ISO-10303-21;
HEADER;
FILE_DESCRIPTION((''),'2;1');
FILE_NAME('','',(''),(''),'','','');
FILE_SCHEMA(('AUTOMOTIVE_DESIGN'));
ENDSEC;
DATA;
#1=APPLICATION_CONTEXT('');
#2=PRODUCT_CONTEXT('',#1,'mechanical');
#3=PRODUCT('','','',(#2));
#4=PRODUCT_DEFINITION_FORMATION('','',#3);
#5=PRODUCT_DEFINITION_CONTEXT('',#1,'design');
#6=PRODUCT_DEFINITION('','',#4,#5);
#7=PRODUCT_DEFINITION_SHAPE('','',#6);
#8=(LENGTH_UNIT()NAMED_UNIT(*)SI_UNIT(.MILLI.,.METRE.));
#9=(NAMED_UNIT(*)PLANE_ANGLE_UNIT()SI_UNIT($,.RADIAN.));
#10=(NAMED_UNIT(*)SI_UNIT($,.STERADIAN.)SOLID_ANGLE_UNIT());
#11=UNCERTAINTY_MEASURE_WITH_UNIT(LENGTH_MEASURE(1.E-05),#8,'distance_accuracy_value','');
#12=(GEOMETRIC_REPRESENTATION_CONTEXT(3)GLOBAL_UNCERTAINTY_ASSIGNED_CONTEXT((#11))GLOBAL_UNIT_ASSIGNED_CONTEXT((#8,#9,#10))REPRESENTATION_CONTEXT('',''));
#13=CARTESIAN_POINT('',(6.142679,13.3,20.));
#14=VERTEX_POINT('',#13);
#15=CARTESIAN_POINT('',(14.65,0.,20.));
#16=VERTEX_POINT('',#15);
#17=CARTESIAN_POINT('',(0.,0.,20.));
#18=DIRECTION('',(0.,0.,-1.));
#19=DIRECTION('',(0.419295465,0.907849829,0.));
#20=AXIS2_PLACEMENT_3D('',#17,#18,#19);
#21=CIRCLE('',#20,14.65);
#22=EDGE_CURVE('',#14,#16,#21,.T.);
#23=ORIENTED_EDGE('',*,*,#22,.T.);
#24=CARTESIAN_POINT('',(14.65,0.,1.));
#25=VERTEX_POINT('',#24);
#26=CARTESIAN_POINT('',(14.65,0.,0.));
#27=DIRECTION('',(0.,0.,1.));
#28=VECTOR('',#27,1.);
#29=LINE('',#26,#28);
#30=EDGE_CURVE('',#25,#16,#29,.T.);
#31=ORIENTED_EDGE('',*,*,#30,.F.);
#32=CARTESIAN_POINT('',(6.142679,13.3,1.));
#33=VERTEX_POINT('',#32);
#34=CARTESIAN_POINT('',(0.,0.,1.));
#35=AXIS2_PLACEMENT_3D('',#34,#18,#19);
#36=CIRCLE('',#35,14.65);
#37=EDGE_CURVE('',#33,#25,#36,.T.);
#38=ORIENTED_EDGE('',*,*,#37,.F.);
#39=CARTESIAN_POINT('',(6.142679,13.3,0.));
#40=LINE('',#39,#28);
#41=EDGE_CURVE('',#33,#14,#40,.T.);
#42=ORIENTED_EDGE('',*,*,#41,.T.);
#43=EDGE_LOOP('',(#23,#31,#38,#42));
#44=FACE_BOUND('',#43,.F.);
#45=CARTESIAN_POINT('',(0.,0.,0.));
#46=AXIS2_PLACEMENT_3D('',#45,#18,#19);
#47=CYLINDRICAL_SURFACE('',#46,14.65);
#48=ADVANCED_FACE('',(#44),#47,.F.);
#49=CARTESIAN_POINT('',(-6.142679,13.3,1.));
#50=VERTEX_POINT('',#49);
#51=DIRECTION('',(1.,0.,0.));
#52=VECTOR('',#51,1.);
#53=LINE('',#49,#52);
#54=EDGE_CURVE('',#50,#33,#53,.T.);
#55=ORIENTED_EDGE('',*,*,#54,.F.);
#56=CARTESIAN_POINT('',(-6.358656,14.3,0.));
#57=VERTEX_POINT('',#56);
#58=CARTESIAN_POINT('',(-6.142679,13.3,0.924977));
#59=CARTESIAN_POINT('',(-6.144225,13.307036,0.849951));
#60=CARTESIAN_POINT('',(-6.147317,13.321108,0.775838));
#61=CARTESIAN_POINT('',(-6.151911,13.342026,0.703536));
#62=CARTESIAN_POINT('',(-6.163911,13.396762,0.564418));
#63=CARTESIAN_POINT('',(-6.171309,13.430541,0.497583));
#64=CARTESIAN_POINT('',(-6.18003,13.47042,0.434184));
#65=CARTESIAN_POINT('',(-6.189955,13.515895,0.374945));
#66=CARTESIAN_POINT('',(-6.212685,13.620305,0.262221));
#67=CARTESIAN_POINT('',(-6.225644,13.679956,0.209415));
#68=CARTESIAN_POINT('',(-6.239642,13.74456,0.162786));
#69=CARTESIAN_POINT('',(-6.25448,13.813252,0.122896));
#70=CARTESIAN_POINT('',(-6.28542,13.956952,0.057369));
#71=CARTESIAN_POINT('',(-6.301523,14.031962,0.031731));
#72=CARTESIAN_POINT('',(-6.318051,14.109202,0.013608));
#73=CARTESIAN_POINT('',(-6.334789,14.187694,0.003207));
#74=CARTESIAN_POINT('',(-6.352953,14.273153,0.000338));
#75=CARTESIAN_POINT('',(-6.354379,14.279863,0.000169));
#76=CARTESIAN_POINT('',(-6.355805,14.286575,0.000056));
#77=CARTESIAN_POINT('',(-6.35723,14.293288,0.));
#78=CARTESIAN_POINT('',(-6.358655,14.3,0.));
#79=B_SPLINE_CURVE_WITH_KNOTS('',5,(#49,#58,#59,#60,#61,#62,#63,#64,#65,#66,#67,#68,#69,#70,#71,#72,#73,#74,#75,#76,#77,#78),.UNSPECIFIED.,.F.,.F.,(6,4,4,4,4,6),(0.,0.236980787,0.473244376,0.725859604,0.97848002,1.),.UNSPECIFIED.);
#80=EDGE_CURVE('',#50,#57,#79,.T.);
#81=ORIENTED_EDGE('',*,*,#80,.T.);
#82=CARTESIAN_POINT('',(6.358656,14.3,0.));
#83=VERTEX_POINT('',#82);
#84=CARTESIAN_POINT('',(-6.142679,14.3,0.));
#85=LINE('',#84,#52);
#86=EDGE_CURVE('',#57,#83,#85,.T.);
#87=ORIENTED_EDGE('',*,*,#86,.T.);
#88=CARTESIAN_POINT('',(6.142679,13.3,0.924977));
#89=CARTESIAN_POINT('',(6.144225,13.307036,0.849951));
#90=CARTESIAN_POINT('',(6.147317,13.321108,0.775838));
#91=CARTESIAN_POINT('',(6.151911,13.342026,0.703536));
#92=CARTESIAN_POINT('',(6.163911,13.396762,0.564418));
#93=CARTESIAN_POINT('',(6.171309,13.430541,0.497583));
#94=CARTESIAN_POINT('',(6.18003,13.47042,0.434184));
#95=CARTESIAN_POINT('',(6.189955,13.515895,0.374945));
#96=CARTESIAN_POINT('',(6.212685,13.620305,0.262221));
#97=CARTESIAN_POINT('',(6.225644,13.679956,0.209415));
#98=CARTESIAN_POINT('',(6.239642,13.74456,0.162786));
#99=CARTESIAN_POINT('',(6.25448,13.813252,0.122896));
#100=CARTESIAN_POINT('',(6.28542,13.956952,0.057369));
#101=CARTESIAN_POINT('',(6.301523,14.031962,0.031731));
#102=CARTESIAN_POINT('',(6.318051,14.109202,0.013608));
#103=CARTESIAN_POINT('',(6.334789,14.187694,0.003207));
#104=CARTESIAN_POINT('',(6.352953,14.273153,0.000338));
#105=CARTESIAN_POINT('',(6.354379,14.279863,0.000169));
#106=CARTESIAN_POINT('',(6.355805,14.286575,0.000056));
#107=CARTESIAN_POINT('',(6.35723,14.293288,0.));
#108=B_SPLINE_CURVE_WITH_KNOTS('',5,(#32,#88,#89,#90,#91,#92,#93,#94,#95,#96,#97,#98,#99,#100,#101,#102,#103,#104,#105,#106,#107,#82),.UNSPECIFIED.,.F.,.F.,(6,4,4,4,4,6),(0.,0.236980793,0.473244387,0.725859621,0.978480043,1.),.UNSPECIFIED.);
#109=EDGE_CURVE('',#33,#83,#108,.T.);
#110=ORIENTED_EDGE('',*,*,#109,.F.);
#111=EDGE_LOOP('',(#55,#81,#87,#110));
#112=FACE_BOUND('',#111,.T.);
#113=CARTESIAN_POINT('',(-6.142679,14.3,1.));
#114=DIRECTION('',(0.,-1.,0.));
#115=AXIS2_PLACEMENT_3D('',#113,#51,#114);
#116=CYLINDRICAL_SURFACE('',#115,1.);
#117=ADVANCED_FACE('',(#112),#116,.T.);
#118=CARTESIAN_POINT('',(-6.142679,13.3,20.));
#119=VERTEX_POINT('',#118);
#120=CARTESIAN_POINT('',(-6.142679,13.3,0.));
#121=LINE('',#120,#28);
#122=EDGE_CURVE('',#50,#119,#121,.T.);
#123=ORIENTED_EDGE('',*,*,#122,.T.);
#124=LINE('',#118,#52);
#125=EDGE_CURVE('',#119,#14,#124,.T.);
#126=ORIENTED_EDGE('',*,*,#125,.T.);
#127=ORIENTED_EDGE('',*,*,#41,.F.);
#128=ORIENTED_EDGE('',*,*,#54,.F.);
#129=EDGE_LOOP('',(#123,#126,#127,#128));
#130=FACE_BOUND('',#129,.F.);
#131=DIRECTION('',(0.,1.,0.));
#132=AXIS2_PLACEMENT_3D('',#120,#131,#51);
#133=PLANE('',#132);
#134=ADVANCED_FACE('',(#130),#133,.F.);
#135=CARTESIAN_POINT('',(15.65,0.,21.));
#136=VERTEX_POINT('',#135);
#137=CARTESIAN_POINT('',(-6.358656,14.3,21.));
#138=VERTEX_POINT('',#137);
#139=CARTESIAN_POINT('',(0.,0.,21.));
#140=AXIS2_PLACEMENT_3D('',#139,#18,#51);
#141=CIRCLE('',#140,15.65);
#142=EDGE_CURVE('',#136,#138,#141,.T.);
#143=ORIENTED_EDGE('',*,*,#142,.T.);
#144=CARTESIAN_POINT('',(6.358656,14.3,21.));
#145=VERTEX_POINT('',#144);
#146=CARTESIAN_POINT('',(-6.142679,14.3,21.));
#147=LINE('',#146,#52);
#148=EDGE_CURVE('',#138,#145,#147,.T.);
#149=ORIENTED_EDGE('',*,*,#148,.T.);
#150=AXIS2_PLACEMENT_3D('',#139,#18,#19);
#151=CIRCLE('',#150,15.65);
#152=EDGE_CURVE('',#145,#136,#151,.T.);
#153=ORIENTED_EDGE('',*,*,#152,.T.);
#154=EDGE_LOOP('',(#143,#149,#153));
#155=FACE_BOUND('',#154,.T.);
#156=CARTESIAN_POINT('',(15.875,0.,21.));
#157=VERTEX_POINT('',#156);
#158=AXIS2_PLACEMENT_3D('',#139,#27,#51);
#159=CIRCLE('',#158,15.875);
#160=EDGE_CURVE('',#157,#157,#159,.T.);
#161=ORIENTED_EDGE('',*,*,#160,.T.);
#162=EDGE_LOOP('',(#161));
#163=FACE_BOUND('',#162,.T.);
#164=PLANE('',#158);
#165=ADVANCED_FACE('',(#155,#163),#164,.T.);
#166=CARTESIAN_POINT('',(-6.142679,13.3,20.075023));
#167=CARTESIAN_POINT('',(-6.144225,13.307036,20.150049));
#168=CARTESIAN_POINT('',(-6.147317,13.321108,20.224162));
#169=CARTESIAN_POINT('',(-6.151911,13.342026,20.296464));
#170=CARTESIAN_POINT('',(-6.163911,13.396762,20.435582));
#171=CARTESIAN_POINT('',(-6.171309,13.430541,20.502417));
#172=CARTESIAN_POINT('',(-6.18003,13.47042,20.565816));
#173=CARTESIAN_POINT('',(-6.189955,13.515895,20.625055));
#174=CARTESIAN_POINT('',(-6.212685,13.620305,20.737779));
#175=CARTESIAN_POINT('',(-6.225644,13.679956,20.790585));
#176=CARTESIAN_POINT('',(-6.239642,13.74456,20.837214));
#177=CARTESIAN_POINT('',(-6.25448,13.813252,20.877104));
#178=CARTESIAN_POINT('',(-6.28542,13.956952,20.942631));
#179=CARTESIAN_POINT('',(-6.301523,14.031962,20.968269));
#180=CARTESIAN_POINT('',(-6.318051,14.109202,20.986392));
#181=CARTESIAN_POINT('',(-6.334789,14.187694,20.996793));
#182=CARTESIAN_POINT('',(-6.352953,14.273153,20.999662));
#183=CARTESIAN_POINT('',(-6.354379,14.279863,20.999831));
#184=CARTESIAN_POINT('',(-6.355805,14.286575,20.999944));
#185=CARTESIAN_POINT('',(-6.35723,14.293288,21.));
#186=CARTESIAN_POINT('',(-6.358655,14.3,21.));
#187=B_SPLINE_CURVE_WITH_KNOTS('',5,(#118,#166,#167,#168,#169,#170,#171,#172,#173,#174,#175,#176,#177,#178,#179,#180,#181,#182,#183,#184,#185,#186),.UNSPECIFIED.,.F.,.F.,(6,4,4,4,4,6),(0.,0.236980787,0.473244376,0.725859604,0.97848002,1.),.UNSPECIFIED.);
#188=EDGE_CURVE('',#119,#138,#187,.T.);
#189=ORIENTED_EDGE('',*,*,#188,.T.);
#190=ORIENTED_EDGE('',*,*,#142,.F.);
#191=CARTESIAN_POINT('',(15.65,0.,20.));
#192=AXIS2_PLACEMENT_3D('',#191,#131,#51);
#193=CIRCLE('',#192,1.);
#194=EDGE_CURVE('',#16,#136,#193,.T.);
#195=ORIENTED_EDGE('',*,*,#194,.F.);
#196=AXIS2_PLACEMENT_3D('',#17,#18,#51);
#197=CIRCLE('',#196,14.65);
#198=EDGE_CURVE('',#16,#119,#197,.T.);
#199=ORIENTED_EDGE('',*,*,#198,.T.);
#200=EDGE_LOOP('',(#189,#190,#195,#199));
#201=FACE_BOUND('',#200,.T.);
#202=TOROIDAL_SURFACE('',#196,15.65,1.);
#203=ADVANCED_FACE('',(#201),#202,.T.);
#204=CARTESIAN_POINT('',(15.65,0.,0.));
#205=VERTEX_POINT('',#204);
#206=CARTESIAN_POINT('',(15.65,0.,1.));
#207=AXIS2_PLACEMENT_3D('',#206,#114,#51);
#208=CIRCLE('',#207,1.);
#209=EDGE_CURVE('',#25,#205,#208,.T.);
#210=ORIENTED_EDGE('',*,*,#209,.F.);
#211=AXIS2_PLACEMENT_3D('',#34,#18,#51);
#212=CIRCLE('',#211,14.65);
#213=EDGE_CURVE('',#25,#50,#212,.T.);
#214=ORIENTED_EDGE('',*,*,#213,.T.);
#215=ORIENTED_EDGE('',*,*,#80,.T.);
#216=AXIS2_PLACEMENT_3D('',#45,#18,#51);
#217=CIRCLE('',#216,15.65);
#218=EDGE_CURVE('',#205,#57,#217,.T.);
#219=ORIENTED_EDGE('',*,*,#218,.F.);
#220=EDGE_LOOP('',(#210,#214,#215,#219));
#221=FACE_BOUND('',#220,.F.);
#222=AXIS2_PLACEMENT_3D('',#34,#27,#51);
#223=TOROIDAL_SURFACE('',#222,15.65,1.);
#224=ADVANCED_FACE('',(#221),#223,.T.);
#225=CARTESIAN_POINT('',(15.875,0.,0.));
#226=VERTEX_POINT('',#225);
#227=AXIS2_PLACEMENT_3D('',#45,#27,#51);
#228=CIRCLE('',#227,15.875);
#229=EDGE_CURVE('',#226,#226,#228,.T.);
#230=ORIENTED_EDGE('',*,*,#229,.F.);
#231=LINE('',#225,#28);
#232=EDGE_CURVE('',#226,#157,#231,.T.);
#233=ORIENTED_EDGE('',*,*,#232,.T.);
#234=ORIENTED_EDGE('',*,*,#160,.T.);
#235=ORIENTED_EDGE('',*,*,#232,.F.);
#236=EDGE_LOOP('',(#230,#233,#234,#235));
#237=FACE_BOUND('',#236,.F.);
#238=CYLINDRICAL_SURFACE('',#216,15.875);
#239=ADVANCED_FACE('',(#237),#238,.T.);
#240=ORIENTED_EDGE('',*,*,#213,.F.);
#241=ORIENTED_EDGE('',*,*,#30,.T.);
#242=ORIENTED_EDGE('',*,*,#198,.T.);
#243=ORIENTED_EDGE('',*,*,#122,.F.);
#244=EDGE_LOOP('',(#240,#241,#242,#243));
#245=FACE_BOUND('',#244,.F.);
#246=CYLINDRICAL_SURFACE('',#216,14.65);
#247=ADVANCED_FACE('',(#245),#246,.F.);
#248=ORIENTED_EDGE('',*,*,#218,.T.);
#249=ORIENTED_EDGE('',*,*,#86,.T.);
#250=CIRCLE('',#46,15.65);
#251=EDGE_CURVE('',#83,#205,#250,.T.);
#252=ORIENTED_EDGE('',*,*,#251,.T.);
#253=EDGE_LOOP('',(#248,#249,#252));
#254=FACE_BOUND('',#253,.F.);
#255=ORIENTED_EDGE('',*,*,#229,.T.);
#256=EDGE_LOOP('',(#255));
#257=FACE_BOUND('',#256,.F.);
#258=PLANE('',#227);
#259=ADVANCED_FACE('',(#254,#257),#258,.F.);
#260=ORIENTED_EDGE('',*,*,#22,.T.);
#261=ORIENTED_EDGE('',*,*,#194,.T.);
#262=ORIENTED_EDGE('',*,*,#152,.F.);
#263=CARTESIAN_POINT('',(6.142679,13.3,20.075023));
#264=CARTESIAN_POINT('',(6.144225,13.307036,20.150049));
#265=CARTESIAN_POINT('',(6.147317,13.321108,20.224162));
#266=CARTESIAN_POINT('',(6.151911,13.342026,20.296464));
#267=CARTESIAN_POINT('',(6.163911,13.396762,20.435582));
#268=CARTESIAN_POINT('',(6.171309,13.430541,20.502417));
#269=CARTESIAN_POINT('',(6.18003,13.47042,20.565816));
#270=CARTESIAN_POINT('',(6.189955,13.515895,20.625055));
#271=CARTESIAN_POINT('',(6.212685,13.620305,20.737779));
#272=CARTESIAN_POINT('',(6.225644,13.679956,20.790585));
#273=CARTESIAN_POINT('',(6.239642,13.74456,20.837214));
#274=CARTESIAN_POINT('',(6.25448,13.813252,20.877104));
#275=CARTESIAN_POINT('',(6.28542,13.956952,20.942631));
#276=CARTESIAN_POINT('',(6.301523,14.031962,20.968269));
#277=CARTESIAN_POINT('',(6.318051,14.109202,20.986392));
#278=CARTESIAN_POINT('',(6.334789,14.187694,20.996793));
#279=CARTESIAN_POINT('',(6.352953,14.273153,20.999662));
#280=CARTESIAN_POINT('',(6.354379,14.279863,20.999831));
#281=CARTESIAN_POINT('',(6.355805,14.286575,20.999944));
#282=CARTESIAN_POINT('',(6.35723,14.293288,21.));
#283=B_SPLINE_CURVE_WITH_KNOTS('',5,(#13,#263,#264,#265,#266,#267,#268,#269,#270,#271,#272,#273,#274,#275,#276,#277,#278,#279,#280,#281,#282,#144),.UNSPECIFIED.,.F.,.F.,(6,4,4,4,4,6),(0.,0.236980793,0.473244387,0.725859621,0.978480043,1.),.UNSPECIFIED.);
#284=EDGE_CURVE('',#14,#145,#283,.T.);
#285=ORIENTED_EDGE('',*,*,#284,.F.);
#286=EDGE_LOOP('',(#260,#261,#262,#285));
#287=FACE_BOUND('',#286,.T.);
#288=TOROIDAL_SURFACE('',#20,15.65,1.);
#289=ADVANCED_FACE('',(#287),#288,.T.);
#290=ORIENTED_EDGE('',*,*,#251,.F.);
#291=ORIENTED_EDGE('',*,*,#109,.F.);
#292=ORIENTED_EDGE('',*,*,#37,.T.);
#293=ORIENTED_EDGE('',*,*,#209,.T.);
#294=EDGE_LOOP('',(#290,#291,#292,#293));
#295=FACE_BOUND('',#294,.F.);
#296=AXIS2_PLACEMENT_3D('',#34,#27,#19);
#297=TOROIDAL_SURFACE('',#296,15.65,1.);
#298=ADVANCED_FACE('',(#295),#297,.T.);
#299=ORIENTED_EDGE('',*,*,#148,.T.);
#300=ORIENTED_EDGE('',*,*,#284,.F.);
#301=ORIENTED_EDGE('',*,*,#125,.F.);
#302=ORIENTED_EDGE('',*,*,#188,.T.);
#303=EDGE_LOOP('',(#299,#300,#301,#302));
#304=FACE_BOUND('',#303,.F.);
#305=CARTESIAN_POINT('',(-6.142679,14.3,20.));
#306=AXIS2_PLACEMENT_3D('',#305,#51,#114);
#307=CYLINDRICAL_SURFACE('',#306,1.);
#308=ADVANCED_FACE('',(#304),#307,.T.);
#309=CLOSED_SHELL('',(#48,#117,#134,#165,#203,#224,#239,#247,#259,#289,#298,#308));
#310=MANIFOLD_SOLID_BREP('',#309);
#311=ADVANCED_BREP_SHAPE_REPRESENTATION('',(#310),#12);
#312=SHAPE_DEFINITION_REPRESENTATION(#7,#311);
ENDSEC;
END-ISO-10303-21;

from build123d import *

# Parameters (mm, degrees)
F0_R     = 15.875
F1_DEPTH = 21
F2_R     = 1


# Not quite as in the source:
# - a feature names something its author has since deleted; it is built from what else it names


with BuildPart() as f1:
    # F0 (on Top) → F1 (new body)
    with BuildSketch(Plane.XY):
        Circle(F0_R)
        with BuildLine():
            ThreePointArc((6.1426785688, 13.3), (12.3412467165, 7.8940565924), (14.65, 0))
            ThreePointArc((14.65, 0), (-7.8940565924, -12.3412467165), (-6.1426785688, 13.3))
            ThreePointArc((-6.1426785688, 13.3), (0, 14.65), (6.1426785688, 13.3))
        make_face(mode=Mode.SUBTRACT)
        with BuildLine():
            Line((-6.1426785688, 13.3), (6.1426785688, 13.3))
            ThreePointArc((6.1426785688, 13.3), (0, 14.65), (-6.1426785688, 13.3))
        make_face()
    extrude(amount=F1_DEPTH)

    # F2
    f2_edges = [f1.edges().sort_by_distance(p)[0] for p in [
        (0, -14.65, 21),
        (0, 13.3, 21),
        (0, -14.65, 0),
        (0, 13.3, 0),
    ]]
    fillet(f2_edges, radius=F2_R)


solid = f1.part
